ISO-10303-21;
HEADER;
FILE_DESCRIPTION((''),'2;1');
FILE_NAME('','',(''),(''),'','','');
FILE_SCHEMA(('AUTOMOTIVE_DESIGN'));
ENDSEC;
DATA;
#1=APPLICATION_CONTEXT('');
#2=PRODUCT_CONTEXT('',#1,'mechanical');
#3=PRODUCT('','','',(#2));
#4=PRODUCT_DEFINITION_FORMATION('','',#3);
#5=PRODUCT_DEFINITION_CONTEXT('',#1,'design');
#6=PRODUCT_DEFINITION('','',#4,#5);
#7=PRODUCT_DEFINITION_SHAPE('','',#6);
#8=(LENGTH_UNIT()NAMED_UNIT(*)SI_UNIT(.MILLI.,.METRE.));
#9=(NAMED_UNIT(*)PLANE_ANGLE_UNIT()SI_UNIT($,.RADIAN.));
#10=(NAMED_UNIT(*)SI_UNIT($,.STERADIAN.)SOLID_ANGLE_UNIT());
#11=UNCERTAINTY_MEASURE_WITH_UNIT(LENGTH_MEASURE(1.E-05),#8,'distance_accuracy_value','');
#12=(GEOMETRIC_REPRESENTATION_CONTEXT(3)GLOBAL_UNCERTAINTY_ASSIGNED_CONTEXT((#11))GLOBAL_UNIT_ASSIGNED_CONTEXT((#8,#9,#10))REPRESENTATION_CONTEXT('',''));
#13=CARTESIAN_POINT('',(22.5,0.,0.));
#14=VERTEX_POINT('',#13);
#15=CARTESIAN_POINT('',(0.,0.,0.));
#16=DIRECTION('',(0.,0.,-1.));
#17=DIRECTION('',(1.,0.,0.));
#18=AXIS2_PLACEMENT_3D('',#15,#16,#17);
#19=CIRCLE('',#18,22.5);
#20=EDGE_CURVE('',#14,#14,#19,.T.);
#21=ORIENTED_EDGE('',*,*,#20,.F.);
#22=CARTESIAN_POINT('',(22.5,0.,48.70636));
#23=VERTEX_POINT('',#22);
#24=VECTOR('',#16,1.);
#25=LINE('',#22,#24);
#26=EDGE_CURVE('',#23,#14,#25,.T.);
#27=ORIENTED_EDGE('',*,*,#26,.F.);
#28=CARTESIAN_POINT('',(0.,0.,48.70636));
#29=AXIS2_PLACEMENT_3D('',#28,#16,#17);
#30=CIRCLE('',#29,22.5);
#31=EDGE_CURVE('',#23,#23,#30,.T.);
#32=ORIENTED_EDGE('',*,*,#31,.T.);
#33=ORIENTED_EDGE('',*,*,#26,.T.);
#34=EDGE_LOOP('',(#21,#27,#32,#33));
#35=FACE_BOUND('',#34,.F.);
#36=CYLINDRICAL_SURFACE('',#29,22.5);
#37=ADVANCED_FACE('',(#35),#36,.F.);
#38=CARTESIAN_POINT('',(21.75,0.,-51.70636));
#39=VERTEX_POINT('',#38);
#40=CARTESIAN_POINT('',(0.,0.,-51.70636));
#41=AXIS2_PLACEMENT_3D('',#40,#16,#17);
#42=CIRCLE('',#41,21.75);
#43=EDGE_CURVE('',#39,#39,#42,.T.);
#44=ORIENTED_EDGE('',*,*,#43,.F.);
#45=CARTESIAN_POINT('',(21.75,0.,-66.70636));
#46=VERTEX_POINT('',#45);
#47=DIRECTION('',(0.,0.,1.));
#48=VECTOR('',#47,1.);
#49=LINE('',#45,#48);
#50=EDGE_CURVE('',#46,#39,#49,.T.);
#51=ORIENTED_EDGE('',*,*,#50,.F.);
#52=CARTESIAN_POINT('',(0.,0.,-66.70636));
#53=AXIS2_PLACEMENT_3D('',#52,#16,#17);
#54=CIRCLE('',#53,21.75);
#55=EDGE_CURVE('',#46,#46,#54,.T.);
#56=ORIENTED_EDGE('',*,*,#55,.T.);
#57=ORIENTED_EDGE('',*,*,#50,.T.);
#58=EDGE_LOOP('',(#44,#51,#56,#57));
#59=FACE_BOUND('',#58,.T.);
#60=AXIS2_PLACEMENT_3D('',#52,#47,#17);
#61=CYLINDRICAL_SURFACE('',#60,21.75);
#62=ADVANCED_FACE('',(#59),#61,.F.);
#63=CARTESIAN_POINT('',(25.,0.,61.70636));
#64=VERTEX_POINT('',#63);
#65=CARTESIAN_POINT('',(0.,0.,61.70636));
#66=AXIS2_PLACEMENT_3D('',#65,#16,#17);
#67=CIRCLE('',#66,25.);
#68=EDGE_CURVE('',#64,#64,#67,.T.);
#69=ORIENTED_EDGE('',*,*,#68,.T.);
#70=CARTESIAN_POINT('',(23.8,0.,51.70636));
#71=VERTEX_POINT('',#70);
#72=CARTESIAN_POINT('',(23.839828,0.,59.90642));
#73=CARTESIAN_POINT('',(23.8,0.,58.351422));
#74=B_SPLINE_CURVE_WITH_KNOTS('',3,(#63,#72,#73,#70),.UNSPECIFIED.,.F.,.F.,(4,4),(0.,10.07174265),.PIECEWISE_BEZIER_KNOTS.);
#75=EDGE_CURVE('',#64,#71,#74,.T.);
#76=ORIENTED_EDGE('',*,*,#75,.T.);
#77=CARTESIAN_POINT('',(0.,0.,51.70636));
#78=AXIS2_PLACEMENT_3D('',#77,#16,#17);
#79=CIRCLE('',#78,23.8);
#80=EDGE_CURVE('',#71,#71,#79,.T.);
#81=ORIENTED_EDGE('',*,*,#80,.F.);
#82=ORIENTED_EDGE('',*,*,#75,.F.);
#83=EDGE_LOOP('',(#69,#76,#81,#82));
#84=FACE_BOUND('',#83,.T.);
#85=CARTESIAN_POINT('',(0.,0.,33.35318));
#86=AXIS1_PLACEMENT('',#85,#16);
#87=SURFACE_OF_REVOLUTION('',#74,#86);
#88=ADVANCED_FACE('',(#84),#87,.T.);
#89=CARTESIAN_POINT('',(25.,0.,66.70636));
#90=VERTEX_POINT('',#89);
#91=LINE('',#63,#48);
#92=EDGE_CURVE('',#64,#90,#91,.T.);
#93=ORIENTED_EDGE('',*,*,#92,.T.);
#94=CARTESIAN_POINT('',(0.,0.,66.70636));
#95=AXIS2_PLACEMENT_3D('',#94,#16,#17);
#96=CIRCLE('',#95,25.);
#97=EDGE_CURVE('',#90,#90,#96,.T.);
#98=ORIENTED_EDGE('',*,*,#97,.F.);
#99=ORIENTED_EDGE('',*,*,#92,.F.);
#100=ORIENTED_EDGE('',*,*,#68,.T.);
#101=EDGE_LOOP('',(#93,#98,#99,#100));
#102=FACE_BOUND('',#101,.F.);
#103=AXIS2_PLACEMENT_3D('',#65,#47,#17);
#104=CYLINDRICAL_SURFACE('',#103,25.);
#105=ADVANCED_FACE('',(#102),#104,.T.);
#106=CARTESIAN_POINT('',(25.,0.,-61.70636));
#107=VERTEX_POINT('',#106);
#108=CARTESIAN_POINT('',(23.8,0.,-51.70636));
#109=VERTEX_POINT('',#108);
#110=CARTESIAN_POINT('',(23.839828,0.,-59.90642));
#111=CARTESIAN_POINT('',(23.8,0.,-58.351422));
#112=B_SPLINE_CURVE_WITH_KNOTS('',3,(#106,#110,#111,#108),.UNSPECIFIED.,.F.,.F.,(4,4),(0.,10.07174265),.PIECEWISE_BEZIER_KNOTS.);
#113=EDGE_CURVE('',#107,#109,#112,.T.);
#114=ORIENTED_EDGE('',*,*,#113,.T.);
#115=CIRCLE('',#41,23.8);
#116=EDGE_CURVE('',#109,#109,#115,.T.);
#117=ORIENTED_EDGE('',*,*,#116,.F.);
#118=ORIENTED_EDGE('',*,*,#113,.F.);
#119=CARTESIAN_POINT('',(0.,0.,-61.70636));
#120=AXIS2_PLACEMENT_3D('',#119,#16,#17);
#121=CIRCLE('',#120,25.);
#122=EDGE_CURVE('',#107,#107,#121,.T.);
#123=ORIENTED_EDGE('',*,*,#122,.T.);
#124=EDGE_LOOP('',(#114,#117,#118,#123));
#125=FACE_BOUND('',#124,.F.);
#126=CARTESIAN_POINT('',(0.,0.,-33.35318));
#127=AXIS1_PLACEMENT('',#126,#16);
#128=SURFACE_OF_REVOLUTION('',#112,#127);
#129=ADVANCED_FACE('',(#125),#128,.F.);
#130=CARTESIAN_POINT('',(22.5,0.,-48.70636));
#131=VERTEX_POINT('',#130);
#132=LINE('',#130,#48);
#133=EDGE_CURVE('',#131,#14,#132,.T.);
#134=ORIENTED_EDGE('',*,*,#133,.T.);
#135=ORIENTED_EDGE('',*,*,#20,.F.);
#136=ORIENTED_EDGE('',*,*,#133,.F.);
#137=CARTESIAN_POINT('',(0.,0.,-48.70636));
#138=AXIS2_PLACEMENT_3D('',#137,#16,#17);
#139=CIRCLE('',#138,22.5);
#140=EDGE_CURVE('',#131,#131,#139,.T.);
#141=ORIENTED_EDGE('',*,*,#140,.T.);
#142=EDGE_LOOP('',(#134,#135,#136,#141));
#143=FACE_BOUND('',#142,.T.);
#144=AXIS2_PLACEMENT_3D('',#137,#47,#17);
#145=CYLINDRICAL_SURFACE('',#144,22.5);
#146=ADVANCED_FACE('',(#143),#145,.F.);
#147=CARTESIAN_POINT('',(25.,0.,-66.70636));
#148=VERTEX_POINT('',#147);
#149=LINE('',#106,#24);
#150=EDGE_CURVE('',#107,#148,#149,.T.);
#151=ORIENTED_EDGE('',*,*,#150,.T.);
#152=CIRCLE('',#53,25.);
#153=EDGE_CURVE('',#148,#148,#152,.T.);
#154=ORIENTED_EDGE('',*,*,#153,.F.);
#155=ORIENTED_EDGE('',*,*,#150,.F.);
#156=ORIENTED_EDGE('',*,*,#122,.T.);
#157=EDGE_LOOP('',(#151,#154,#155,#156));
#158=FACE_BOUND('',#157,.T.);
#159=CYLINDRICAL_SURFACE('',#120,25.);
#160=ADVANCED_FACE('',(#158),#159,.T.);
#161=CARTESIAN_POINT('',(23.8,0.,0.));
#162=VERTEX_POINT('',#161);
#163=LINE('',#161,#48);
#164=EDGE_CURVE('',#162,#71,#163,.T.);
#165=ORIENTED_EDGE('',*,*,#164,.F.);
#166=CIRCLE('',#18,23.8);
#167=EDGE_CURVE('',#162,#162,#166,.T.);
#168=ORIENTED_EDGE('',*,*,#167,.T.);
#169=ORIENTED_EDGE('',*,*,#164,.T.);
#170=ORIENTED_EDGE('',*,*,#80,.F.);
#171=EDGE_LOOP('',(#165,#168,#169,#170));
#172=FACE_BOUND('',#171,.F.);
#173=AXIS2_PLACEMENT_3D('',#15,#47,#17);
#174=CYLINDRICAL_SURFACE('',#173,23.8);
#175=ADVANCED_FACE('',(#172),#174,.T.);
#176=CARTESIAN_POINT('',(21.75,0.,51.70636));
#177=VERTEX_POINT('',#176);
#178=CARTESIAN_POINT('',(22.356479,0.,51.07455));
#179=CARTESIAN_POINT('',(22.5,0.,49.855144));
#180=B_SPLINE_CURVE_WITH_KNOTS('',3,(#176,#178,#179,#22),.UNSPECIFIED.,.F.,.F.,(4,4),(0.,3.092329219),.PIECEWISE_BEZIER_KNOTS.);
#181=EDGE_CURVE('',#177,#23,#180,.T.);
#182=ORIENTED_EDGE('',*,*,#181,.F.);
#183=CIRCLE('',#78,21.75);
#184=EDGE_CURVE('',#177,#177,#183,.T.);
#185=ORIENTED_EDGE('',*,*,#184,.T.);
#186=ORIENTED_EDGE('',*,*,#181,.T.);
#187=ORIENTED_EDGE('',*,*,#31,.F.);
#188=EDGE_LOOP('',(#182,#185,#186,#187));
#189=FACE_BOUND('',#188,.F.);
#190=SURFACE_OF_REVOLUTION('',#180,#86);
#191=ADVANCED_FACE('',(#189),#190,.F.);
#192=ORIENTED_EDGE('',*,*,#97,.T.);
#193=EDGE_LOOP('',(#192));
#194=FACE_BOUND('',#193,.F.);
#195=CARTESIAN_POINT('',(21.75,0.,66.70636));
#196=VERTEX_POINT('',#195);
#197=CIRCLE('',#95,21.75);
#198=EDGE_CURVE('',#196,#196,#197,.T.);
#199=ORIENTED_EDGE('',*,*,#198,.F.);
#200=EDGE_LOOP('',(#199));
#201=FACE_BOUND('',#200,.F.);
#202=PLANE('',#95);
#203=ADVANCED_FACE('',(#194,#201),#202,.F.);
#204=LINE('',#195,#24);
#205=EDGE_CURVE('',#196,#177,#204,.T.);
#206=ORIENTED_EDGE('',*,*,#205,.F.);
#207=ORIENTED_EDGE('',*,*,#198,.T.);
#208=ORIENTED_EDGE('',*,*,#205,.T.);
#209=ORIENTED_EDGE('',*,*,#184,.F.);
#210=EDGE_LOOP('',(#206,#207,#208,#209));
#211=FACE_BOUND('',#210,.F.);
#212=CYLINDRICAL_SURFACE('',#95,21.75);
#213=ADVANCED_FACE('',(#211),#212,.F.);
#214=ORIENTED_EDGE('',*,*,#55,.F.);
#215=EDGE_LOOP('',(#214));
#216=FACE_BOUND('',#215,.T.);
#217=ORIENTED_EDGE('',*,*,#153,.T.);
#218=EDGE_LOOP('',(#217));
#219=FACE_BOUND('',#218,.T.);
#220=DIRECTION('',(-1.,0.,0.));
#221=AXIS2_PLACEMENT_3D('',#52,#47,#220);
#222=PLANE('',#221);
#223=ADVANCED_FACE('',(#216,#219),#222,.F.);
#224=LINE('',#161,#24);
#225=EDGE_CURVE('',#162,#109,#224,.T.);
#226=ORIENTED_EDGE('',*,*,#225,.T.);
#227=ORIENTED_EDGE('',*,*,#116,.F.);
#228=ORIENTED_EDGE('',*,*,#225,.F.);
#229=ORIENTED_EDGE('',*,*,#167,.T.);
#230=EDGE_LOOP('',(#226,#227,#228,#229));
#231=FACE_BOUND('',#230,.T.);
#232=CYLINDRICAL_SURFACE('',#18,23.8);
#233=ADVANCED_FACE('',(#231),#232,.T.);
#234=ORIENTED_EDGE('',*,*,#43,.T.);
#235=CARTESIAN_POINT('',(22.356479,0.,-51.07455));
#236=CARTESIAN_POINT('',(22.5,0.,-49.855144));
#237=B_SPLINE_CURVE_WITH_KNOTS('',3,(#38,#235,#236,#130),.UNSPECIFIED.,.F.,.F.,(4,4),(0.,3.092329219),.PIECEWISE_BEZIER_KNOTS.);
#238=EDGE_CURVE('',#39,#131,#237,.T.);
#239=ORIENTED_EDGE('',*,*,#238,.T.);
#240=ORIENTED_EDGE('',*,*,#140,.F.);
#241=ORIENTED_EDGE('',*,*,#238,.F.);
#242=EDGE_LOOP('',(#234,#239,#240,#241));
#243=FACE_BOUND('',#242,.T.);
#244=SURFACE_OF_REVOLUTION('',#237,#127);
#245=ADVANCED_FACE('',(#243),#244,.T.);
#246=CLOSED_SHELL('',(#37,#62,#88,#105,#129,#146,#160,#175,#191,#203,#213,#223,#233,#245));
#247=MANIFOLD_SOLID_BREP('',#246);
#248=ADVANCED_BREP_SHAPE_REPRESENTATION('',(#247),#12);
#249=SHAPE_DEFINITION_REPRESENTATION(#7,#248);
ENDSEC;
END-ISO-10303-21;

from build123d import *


with BuildPart() as f1:
    # F0 (on Front) → F1 (revolve)
    with BuildSketch(Plane.XZ):
        with BuildLine():
            Line((25, 66.7063602807), (21.75, 66.7063602807))
            Line((21.75, 66.7063602807), (21.75, 51.7063602807))
            add(Edge.make_bspline(
                [(21.75, 51.7063602807), (22.356479466, 51.0745504571), (22.5, 49.8551437309), (22.5, 48.7063602807)],
                knots=[0, 0, 0, 0, 3.0923292192, 3.0923292192, 3.0923292192, 3.0923292192], degree=3))
            Line((22.5, 48.7063602807), (22.5, 0))
            Line((22.5, 0), (23.8, 0))
            Line((23.8, 0), (23.8, 51.7063602807))
            add(Edge.make_bspline(
                [(25, 61.7063602807), (23.8398276269, 59.9064195158), (23.8, 58.3514220487), (23.8, 51.7063602807)],
                knots=[0, 0, 0, 0, 10.0717426496, 10.0717426496, 10.0717426496, 10.0717426496], degree=3))
            Line((25, 61.7063602807), (25, 66.7063602807))
        make_face()
    revolve(axis=Axis((0, 0, 33.3531801404), (0, 0, -1)))

    # F2: F1 across face


with BuildPart() as f1_1:
    add(f1.part)
    add(f1.part.mirror(Plane(origin=(0, 0, 0), x_dir=(1, 0, 0), z_dir=(0, 0, -1))))


solid = f1_1.part
